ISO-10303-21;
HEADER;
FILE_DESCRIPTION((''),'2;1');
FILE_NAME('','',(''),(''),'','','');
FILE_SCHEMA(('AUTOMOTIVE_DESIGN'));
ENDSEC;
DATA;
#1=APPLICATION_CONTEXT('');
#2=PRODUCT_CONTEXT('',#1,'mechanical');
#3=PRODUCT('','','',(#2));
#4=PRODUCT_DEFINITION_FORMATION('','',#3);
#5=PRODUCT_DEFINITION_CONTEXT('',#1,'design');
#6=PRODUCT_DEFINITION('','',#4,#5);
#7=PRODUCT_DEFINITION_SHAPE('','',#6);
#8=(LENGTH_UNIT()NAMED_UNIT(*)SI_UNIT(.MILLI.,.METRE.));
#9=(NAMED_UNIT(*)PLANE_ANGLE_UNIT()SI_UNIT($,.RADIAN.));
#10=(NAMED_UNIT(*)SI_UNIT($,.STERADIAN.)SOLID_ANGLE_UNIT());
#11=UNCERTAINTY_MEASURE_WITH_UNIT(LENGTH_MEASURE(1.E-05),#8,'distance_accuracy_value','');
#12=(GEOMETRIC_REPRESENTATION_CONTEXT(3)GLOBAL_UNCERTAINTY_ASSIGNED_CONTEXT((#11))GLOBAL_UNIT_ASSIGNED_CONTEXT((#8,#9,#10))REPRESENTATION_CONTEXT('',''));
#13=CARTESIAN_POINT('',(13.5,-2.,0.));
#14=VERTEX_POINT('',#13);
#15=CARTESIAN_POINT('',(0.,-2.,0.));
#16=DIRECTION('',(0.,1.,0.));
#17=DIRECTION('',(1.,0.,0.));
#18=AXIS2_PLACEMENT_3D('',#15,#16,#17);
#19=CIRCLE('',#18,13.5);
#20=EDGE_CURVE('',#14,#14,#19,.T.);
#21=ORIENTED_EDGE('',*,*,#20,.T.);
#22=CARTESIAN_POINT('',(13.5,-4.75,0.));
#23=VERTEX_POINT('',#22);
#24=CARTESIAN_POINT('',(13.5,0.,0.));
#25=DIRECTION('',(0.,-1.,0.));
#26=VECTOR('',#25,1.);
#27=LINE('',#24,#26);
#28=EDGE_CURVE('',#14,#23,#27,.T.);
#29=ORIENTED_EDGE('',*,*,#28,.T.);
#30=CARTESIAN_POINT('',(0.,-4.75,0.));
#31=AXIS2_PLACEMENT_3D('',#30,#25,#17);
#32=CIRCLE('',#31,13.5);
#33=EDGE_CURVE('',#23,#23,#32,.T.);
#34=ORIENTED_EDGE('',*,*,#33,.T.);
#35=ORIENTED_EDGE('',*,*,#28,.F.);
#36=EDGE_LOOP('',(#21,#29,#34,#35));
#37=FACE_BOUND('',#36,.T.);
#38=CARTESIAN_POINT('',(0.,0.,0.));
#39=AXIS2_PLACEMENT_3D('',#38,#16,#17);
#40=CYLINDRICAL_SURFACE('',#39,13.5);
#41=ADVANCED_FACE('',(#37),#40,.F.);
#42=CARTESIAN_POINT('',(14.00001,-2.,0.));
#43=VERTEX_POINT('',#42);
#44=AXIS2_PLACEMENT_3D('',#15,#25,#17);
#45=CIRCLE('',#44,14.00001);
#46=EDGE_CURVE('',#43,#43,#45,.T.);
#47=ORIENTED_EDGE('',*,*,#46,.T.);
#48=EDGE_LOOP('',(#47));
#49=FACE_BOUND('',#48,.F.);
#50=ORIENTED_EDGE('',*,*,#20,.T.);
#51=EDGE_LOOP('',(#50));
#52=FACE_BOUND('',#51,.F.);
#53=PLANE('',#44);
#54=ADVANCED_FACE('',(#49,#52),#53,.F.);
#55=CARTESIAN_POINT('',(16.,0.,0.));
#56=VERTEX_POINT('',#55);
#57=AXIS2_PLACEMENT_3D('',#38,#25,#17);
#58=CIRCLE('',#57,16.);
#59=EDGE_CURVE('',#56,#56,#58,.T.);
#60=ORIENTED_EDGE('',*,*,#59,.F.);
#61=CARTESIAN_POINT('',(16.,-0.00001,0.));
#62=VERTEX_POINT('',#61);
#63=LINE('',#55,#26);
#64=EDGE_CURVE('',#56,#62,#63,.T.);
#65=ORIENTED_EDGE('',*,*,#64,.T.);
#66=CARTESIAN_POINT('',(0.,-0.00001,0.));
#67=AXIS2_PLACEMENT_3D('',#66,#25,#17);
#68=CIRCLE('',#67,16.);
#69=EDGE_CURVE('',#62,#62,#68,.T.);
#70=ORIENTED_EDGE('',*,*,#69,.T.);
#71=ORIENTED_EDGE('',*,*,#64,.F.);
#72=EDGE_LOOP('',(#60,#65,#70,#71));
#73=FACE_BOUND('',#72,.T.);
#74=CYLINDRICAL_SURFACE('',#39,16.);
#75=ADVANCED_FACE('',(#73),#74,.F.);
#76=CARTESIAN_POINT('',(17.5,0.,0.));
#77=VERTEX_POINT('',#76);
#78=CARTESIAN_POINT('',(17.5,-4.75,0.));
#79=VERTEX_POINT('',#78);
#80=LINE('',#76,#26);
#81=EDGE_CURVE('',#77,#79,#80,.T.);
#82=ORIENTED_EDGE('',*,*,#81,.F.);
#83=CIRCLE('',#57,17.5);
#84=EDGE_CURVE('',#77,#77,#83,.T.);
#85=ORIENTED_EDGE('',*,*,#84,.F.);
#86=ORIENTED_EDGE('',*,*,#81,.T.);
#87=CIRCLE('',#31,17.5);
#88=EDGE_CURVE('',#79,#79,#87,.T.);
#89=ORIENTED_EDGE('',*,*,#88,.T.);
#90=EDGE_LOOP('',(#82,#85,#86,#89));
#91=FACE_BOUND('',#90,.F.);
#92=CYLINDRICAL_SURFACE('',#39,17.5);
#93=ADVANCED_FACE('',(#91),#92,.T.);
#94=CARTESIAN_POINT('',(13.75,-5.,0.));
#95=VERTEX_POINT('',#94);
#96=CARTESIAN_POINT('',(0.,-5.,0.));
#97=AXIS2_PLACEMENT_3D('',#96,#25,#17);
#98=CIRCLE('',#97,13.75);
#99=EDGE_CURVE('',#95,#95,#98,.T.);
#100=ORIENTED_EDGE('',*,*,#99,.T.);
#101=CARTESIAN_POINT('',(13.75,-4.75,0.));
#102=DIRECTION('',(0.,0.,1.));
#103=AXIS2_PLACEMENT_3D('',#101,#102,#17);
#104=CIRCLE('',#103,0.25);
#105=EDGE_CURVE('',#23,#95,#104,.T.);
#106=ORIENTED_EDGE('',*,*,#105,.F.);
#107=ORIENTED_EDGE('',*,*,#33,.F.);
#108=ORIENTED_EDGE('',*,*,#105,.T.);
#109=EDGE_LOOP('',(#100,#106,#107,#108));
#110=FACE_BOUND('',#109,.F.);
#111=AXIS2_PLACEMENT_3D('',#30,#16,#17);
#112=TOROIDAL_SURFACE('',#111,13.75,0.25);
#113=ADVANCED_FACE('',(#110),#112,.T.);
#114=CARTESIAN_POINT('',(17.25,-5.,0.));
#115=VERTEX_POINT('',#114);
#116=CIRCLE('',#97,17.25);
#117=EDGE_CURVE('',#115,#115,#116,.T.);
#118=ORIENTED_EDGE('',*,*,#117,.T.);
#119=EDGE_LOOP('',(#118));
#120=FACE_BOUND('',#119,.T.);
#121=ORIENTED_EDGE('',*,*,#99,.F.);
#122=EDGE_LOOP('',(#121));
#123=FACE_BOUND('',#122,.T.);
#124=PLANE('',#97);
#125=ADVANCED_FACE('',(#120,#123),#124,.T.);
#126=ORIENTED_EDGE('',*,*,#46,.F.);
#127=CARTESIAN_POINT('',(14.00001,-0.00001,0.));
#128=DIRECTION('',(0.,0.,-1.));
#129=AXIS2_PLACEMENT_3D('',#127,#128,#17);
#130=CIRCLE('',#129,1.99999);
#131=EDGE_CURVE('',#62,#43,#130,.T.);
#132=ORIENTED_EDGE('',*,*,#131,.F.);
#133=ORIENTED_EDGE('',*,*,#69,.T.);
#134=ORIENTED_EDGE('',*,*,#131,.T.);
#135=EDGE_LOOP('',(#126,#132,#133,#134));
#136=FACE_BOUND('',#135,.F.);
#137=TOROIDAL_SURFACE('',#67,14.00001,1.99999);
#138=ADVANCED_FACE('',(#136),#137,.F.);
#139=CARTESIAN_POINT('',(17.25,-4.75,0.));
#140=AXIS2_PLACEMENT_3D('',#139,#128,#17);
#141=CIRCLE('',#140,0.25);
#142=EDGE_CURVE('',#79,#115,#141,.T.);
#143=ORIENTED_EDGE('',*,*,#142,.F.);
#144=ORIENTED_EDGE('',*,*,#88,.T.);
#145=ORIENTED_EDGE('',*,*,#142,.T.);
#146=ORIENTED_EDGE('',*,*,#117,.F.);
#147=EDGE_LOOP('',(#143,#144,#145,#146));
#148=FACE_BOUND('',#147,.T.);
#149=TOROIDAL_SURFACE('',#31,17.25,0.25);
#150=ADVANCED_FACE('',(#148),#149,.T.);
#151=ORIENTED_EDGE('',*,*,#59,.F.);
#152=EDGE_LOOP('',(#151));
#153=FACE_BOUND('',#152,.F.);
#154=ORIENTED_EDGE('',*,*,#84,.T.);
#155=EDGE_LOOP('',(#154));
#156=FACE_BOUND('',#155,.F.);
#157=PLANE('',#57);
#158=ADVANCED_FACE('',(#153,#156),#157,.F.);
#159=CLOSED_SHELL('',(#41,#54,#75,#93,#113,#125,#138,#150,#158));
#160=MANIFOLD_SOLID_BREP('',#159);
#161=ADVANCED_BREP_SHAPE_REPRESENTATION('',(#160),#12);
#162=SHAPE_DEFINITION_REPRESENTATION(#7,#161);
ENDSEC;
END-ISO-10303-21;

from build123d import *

# Parameters (mm, degrees)
F0_R     = 17.5
F0_R_2   = 13.5
F1_DEPTH = 5
F2_R     = 0.25
F3_R     = 16
F4_DEPTH = 2
F5_R     = 1.99999


# Not quite as in the source:
# - a fillet or chamfer is up to 0.001 mm smaller than in the source, because OpenCascade refuses the exact size


with BuildPart() as f1:
    # F0 (on Front) → F1 (new body)
    with BuildSketch(Plane.XZ):
        Circle(F0_R)
        Circle(F0_R_2, mode=Mode.SUBTRACT)
    extrude(amount=F1_DEPTH)

    # F2
    f2_edges = [f1.edges().sort_by_distance(p)[0] for p in [
        (-17.5, -5, 0),
        (-13.5, -5, 0),
    ]]
    fillet(f2_edges, radius=F2_R)

    # F3 (on Front) → F4 (cut)
    with BuildSketch(Plane.XZ):
        Circle(F3_R)
    extrude(amount=F4_DEPTH, mode=Mode.SUBTRACT)

    # F5 (radius 2 in the source; OpenCascade refuses exactly that, so slightly less here)
    f5_edges = [f1.edges().sort_by_distance(p)[0] for p in [
        (-16, -2, 0),
    ]]
    fillet(f5_edges, radius=F5_R)


solid = f1.part
